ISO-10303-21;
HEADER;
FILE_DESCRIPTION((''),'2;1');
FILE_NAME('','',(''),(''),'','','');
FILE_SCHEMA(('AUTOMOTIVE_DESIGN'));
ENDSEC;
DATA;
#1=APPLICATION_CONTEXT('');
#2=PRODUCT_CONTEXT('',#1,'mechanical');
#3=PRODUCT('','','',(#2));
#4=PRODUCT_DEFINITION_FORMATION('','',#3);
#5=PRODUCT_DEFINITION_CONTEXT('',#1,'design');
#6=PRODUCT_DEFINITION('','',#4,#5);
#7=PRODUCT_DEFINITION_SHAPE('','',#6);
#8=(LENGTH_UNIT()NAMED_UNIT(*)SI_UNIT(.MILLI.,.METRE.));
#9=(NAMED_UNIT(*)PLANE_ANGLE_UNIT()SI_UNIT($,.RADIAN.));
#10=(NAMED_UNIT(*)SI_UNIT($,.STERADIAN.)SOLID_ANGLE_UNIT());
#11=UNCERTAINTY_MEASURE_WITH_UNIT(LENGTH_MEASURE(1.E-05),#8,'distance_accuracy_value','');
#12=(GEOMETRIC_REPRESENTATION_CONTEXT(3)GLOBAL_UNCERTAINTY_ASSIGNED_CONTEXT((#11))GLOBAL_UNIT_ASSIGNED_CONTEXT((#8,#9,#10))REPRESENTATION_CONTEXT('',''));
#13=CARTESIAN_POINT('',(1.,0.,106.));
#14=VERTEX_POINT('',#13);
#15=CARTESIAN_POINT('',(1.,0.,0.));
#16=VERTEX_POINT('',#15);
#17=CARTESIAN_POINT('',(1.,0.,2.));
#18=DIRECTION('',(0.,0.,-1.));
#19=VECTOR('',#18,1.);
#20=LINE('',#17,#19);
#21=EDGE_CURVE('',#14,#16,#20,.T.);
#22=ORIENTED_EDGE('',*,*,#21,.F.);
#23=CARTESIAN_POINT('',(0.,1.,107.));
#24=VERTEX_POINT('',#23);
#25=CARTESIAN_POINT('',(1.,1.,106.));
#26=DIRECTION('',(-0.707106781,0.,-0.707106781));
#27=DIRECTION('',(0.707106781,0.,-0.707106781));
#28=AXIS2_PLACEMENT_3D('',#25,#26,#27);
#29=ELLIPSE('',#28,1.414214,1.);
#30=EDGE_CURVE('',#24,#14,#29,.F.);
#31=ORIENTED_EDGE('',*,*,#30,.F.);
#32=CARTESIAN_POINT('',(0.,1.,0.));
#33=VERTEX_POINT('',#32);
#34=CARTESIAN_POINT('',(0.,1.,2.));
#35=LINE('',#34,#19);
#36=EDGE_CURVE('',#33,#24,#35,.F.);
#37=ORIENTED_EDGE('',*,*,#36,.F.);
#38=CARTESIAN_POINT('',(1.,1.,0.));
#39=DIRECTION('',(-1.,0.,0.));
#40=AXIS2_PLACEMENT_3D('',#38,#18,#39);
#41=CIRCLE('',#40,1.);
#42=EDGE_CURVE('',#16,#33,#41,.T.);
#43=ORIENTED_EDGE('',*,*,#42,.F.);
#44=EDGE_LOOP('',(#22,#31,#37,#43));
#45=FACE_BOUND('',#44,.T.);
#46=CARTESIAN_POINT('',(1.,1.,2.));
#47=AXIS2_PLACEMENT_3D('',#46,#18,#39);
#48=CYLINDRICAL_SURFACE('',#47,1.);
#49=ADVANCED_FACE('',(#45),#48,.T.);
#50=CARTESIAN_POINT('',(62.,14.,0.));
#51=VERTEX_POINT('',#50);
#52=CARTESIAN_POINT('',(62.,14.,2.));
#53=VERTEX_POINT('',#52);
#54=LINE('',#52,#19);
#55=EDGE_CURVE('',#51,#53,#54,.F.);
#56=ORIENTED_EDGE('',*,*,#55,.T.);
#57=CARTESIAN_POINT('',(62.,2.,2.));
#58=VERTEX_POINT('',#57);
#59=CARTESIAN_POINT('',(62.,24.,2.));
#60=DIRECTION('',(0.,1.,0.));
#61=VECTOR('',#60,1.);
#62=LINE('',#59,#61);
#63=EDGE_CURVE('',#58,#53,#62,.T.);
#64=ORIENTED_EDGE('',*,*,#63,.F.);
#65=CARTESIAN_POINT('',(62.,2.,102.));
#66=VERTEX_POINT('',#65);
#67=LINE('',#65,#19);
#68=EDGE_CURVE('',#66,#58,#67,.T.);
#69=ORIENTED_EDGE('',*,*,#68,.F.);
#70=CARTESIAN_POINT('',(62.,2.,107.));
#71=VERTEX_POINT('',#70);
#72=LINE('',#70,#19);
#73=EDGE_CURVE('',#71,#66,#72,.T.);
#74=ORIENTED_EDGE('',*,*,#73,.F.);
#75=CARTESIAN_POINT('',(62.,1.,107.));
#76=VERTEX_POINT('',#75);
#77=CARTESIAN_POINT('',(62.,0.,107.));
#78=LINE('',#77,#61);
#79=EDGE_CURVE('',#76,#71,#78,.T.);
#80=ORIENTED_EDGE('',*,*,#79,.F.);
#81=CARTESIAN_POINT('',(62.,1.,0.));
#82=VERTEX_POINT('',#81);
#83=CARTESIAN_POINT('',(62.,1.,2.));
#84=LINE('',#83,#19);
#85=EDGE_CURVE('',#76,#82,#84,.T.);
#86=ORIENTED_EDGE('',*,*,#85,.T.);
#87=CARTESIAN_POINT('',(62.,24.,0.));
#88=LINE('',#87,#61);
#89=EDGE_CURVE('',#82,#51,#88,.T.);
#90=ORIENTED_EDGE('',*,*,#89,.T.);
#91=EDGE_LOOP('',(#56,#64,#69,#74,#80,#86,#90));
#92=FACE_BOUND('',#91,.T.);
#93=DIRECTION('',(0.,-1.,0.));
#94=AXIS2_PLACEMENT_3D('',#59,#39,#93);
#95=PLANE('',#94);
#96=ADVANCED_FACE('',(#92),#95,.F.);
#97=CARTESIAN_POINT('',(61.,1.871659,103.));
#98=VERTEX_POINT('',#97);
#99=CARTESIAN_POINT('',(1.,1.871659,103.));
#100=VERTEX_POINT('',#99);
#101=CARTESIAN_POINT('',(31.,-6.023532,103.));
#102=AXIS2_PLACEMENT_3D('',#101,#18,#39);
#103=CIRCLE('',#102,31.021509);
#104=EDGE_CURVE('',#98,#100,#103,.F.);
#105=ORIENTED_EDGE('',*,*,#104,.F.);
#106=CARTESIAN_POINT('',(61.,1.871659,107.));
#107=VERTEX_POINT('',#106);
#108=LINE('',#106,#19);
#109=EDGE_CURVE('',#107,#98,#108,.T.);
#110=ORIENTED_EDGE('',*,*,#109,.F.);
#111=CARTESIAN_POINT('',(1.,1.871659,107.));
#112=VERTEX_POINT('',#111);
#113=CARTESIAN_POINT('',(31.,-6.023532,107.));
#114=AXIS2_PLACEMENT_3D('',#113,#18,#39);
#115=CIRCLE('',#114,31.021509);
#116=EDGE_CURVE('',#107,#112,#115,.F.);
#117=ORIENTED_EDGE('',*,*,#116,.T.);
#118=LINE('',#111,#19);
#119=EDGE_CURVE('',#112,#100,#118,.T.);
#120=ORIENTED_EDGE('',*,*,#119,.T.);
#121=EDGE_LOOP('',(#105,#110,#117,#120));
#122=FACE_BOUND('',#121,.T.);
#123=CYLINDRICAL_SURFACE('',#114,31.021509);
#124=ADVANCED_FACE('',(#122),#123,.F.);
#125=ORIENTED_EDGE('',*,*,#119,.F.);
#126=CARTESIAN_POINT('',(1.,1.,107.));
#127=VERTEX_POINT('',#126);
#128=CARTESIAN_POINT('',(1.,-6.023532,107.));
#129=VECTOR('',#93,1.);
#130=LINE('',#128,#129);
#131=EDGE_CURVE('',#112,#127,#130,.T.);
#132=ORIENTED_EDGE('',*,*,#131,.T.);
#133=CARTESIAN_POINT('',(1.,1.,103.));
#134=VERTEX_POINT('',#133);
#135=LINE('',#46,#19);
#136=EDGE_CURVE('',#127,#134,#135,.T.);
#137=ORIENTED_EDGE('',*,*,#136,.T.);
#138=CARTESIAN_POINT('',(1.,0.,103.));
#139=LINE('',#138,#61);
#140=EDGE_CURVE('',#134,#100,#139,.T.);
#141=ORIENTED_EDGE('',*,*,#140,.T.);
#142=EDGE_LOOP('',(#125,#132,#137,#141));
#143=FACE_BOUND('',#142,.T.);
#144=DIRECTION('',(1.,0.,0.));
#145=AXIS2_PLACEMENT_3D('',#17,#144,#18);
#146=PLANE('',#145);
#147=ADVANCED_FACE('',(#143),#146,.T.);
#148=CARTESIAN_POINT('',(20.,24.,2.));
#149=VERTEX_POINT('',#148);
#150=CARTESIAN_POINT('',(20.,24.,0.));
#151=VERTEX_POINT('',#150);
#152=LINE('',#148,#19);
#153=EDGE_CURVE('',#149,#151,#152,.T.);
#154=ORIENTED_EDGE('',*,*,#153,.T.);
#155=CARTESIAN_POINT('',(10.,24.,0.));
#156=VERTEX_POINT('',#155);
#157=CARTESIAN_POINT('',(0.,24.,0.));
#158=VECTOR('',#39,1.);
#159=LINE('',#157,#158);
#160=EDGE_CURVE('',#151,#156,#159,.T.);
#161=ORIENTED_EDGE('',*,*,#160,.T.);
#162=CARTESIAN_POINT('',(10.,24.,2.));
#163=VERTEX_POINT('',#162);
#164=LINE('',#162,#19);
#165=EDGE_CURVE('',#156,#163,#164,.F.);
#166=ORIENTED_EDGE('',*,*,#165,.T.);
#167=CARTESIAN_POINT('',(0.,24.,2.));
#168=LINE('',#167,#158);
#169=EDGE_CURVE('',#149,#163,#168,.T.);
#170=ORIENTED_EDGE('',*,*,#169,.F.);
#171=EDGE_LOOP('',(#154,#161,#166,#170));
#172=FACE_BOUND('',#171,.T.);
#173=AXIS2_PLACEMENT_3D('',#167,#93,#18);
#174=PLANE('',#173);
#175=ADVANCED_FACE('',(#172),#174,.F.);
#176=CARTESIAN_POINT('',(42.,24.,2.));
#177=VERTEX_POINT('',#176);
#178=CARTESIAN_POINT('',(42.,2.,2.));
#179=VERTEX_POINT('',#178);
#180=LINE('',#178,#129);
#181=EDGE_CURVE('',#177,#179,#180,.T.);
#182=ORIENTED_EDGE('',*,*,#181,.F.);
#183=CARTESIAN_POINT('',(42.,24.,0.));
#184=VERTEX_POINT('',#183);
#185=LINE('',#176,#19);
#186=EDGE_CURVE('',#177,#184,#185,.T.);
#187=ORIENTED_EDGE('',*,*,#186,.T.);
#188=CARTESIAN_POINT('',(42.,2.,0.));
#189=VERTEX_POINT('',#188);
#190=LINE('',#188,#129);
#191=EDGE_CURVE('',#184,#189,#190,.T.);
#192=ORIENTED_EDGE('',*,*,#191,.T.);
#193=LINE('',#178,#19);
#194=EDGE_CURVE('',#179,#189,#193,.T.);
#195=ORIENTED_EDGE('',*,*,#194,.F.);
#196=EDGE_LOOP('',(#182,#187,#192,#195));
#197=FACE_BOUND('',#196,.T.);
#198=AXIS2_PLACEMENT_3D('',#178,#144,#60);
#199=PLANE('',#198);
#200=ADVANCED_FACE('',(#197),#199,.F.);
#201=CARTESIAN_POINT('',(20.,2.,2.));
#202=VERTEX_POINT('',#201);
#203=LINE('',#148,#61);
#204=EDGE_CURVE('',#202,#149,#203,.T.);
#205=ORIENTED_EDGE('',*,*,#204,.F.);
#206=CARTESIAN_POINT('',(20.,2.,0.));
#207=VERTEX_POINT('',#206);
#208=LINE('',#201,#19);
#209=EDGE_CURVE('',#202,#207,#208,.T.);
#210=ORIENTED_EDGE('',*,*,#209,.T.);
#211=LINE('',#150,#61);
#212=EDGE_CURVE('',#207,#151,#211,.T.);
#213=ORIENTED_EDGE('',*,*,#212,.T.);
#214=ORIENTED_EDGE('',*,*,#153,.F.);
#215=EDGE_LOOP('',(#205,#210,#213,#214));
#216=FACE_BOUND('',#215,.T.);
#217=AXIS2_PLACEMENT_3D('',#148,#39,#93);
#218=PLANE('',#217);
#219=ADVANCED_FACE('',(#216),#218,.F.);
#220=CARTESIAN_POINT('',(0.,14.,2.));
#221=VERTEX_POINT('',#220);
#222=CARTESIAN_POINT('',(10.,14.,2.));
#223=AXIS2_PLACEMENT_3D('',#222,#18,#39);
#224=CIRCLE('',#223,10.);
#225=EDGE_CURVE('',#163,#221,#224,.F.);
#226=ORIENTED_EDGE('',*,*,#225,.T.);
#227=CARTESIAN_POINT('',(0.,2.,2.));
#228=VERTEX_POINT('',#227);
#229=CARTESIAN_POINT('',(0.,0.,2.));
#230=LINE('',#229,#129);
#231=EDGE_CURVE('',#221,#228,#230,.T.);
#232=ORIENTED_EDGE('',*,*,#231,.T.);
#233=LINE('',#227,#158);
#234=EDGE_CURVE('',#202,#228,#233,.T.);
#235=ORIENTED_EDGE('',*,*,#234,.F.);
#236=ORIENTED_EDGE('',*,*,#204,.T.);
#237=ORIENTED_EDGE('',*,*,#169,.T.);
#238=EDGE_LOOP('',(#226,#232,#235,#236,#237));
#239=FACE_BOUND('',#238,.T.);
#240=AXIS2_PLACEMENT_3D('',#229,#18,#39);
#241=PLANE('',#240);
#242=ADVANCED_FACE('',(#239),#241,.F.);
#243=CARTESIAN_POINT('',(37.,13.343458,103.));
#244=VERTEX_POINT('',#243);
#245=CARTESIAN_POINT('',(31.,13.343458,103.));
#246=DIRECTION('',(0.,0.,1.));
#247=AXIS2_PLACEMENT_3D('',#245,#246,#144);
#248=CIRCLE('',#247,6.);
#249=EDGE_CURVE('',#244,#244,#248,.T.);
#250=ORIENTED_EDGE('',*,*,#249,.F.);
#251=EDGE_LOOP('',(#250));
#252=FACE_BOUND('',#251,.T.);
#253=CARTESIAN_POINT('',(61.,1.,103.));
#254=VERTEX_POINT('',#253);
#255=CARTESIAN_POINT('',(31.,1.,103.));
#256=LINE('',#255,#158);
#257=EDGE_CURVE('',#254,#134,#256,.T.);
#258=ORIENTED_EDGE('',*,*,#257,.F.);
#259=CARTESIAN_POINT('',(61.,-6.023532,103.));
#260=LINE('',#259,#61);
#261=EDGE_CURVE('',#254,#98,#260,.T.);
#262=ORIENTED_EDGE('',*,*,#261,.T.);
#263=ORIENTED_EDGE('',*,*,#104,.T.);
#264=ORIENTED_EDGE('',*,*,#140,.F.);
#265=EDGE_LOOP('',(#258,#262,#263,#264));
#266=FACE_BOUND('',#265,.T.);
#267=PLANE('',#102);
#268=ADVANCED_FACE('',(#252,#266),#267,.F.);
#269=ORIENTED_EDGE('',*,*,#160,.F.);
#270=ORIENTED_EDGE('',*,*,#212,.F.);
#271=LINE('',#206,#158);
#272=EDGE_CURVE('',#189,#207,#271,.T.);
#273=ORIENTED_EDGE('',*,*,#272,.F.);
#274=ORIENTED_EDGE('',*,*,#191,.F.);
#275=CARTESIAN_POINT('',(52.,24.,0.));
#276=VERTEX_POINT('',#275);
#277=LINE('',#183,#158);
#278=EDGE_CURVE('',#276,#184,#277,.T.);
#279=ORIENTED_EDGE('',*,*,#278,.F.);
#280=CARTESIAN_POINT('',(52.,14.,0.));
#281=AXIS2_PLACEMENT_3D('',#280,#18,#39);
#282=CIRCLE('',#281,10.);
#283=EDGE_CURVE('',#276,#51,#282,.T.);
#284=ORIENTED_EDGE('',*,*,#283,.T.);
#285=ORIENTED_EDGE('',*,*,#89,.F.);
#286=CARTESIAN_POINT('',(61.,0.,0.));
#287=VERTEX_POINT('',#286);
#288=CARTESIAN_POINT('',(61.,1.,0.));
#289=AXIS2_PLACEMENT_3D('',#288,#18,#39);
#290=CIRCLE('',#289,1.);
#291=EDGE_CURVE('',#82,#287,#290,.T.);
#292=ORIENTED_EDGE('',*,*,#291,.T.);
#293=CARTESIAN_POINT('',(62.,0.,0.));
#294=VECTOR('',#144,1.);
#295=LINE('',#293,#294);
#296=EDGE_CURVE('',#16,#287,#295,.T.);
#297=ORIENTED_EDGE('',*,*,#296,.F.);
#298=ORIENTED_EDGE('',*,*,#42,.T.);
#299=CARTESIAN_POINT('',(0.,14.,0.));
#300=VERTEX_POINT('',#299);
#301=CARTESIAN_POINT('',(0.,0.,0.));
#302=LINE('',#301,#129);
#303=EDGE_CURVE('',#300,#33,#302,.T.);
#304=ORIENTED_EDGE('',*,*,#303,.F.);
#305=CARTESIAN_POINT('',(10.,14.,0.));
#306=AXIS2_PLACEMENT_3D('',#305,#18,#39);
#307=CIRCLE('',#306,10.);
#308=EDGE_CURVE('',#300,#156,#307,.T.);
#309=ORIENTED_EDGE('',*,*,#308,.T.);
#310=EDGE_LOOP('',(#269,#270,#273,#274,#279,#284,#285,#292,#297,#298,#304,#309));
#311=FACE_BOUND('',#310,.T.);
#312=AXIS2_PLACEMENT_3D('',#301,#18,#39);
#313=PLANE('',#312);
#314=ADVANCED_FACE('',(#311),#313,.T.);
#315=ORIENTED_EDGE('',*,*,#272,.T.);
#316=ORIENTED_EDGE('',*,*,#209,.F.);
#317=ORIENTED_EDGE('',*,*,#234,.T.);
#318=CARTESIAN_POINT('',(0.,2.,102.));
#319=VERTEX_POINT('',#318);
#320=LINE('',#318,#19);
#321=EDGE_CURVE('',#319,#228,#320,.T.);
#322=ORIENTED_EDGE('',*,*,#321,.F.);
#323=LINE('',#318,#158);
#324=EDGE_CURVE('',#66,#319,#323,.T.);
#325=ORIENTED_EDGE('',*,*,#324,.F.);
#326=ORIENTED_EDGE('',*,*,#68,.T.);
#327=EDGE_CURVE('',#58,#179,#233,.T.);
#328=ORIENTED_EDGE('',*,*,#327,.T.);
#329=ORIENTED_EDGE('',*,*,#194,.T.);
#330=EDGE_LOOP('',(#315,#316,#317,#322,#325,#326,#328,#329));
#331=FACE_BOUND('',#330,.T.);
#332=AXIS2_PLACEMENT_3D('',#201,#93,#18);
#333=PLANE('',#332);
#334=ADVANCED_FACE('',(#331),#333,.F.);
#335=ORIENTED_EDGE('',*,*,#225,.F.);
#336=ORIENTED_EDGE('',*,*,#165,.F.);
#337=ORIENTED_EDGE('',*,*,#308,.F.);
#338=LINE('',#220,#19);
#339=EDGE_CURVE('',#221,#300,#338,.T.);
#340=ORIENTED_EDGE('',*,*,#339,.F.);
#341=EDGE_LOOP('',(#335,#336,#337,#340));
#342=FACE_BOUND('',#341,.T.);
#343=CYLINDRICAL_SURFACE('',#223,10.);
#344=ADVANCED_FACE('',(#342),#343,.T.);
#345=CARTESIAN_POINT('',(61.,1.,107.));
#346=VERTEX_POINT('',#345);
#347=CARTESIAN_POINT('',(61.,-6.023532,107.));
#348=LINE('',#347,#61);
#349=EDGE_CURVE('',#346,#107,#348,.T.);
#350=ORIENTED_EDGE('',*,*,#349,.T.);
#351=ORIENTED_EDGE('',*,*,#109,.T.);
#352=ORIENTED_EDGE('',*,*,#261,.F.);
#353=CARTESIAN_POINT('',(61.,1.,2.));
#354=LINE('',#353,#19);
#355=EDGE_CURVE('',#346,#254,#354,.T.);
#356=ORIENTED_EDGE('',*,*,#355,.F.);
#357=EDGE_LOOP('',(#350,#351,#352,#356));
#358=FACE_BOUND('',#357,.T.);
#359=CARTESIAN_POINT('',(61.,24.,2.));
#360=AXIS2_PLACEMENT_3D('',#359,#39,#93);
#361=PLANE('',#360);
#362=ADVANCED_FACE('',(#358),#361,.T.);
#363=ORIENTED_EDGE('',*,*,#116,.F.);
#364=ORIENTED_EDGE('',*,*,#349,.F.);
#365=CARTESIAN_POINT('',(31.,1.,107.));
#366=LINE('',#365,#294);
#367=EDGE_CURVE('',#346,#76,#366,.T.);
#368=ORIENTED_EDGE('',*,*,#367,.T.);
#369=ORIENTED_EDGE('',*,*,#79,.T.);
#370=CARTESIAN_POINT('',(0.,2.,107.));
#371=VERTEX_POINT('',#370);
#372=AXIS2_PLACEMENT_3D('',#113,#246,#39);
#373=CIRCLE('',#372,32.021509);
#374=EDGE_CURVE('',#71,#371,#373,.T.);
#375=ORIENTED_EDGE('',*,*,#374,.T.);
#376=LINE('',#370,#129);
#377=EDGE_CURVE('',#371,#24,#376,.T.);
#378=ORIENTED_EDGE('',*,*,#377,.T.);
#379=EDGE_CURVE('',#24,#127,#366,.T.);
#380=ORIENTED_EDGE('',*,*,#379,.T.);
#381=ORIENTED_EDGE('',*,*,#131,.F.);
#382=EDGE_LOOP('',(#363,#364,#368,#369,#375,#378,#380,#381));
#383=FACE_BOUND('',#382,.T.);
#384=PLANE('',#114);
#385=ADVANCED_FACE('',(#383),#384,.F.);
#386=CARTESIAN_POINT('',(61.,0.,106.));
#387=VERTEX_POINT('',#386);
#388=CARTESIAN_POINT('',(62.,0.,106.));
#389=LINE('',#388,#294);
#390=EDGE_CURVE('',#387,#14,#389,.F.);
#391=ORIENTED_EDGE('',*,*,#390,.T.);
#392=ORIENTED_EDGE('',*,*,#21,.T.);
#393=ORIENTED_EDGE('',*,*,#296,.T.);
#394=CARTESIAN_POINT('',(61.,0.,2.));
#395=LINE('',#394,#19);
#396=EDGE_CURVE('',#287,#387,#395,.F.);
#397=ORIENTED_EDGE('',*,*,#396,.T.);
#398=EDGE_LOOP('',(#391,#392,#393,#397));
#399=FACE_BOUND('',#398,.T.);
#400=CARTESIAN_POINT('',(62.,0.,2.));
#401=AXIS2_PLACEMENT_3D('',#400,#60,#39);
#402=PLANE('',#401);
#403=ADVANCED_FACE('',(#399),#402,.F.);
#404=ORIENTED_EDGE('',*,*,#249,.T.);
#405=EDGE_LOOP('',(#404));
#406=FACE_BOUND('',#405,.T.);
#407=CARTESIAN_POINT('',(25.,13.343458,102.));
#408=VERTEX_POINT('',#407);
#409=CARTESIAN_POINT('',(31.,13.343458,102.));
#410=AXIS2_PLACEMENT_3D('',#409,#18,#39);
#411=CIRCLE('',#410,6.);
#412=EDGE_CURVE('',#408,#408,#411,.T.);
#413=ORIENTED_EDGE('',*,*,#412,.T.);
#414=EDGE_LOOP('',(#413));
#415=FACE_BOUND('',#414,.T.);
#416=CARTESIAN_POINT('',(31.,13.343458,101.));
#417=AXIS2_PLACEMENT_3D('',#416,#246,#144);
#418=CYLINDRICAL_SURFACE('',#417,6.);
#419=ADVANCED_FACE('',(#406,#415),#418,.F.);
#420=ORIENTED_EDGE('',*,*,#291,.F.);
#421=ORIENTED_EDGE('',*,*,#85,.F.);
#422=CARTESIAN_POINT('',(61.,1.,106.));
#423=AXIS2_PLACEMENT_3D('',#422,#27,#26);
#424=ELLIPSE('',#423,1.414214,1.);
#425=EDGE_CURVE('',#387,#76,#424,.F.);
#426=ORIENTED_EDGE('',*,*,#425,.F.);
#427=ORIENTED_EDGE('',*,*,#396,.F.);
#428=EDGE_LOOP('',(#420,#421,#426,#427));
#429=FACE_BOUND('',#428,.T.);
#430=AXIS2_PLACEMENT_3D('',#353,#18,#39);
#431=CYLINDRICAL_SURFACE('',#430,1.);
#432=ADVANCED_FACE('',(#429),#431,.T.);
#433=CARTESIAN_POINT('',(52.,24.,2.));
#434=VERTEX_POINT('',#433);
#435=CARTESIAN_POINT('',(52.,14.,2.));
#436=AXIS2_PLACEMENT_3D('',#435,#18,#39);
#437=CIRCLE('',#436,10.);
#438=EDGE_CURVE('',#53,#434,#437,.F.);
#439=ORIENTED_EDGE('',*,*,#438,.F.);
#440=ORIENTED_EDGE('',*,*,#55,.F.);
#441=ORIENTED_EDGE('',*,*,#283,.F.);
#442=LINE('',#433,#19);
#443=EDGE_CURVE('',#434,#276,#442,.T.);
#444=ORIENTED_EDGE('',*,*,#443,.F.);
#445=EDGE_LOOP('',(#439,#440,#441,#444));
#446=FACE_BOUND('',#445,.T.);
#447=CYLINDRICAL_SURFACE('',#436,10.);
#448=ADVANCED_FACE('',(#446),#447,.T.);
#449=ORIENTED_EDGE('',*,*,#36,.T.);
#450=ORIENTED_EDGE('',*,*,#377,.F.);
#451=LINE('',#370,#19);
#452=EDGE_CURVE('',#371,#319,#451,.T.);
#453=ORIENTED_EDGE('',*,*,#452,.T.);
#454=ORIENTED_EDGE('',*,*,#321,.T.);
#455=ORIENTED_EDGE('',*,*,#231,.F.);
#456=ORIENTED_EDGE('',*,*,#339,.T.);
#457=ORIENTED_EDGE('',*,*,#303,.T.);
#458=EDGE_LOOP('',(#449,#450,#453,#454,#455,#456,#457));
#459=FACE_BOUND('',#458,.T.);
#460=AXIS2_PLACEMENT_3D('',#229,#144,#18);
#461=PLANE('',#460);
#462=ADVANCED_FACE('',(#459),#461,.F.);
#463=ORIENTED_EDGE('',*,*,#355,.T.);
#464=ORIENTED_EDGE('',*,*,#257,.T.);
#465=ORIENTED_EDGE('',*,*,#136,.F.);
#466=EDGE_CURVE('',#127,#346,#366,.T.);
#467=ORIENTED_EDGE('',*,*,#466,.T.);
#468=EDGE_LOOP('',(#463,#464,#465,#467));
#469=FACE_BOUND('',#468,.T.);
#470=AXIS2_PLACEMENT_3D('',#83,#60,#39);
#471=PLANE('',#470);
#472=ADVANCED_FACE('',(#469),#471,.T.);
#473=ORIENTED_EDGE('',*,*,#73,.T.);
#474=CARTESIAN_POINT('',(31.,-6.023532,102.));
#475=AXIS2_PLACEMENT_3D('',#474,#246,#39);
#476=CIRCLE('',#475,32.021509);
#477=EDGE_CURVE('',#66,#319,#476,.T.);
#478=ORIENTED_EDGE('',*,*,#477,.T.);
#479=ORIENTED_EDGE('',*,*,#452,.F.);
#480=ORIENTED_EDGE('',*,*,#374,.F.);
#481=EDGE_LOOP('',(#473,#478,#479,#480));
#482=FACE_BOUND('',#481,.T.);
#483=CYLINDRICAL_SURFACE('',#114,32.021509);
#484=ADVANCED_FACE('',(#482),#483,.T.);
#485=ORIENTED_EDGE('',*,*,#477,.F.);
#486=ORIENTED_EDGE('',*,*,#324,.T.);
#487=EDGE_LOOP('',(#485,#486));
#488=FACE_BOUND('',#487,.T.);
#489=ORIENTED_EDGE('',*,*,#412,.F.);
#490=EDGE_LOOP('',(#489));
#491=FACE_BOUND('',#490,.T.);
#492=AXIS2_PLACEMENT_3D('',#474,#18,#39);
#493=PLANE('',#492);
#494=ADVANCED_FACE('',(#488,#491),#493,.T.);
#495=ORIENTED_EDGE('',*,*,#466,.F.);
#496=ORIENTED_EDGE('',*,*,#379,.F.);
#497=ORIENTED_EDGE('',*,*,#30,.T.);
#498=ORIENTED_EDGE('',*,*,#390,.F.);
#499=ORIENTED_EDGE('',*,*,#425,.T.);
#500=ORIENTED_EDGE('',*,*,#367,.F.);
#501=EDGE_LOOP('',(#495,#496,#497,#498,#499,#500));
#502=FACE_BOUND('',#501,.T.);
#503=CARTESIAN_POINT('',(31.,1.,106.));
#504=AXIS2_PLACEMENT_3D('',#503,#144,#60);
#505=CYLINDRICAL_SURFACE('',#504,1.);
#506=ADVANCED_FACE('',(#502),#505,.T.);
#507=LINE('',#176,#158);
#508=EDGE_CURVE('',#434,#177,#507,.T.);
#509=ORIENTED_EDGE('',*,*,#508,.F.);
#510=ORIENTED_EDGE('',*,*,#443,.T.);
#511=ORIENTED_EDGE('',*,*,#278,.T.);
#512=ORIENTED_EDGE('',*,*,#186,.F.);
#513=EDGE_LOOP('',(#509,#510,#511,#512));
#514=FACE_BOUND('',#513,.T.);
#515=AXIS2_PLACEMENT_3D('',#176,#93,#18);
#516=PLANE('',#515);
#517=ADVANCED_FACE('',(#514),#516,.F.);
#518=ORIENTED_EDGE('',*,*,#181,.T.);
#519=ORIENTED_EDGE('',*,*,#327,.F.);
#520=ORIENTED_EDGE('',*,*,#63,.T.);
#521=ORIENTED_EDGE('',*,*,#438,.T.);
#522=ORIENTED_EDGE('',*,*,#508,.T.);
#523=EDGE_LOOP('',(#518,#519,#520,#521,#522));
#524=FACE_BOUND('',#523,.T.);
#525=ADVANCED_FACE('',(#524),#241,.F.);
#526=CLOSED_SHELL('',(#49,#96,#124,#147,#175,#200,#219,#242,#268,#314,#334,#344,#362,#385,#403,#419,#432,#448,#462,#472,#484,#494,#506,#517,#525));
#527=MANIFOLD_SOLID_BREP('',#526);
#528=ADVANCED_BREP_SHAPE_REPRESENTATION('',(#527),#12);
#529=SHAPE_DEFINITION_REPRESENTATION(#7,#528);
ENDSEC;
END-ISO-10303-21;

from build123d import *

# Parameters (mm, degrees)
BOSS_EXTRUDE1_DEPTH = 2
SKETCH4_W           = 62
SKETCH4_H           = 2
BOSS_EXTRUDE2_DEPTH = 100
BOSS_EXTRUDE3_DEPTH = 5
SHELL1_START        = 103
SHELL1_DEPTH        = 4
FILLET1_R           = 1
SKETCH7_R           = 6
CUT_EXTRUDE1_DEPTH  = 2
FILLET2_R           = 10
FILLET3_R           = 10


# Read off the part's stored shape, not the designer's step: Shell1
with BuildPart() as part:
    # Sketch3 → Boss-Extrude1 (new body)
    with BuildSketch(Plane.XY):
        Polygon((0, 0), (0, 24), (20, 24), (20, 2), (42, 2), (42, 24), (62, 24), (62, 0), align=None)
    extrude(amount=BOSS_EXTRUDE1_DEPTH)

    # Sketch4 → Boss-Extrude2 (add)
    with BuildSketch(Plane.XY.offset(2)):
        with Locations((31, 1)):
            Rectangle(SKETCH4_W, SKETCH4_H)
    extrude(amount=BOSS_EXTRUDE2_DEPTH)

    # Sketch6 → Boss-Extrude3 (add)
    with BuildSketch(Plane.XY.offset(102)):
        with BuildLine():
            Line((0, 2), (0, 0))
            Line((0, 0), (62, 0))
            Line((62, 0), (62, 2))
            ThreePointArc((62, 2), (31, 25.997977773), (0, 2))
        make_face()
    extrude(amount=BOSS_EXTRUDE3_DEPTH)

    # Shell1 outline → Shell1 (cut)
    with BuildSketch(Plane.XY.offset(SHELL1_START)):
        with BuildLine():
            Line((1, 1), (61, 1))
            Line((61, 1), (61, 1.871659386))
            ThreePointArc((61, 1.871659386), (31, 24.997977773), (1, 1.871659386))
            Line((1, 1.871659386), (1, 1))
        make_face()
    extrude(amount=SHELL1_DEPTH, mode=Mode.SUBTRACT)

    # Fillet1
    fillet1_edges = [part.edges().sort_by_distance(p)[0] for p in [
        (0, 0, 53.5),
        (62, 0, 53.5),
        (31, 0, 107),
    ]]
    fillet(fillet1_edges, radius=FILLET1_R - 0.0001)  # a hair under: the kernel refuses the full size

    # Sketch7 → Cut-Extrude1 (cut)
    with BuildSketch(Plane.XY.offset(103)):
        with Locations((31, 13.343458138)):
            Circle(SKETCH7_R)
    extrude(amount=-CUT_EXTRUDE1_DEPTH, mode=Mode.SUBTRACT)

    # Fillet2
    fillet2_edges = [part.edges().sort_by_distance(p)[0] for p in [
        (0, 24, 1),
    ]]
    fillet(fillet2_edges, radius=FILLET2_R)

    # Fillet3
    fillet3_edges = [part.edges().sort_by_distance(p)[0] for p in [
        (62, 24, 1),
    ]]
    fillet(fillet3_edges, radius=FILLET3_R)


solid = part.part
